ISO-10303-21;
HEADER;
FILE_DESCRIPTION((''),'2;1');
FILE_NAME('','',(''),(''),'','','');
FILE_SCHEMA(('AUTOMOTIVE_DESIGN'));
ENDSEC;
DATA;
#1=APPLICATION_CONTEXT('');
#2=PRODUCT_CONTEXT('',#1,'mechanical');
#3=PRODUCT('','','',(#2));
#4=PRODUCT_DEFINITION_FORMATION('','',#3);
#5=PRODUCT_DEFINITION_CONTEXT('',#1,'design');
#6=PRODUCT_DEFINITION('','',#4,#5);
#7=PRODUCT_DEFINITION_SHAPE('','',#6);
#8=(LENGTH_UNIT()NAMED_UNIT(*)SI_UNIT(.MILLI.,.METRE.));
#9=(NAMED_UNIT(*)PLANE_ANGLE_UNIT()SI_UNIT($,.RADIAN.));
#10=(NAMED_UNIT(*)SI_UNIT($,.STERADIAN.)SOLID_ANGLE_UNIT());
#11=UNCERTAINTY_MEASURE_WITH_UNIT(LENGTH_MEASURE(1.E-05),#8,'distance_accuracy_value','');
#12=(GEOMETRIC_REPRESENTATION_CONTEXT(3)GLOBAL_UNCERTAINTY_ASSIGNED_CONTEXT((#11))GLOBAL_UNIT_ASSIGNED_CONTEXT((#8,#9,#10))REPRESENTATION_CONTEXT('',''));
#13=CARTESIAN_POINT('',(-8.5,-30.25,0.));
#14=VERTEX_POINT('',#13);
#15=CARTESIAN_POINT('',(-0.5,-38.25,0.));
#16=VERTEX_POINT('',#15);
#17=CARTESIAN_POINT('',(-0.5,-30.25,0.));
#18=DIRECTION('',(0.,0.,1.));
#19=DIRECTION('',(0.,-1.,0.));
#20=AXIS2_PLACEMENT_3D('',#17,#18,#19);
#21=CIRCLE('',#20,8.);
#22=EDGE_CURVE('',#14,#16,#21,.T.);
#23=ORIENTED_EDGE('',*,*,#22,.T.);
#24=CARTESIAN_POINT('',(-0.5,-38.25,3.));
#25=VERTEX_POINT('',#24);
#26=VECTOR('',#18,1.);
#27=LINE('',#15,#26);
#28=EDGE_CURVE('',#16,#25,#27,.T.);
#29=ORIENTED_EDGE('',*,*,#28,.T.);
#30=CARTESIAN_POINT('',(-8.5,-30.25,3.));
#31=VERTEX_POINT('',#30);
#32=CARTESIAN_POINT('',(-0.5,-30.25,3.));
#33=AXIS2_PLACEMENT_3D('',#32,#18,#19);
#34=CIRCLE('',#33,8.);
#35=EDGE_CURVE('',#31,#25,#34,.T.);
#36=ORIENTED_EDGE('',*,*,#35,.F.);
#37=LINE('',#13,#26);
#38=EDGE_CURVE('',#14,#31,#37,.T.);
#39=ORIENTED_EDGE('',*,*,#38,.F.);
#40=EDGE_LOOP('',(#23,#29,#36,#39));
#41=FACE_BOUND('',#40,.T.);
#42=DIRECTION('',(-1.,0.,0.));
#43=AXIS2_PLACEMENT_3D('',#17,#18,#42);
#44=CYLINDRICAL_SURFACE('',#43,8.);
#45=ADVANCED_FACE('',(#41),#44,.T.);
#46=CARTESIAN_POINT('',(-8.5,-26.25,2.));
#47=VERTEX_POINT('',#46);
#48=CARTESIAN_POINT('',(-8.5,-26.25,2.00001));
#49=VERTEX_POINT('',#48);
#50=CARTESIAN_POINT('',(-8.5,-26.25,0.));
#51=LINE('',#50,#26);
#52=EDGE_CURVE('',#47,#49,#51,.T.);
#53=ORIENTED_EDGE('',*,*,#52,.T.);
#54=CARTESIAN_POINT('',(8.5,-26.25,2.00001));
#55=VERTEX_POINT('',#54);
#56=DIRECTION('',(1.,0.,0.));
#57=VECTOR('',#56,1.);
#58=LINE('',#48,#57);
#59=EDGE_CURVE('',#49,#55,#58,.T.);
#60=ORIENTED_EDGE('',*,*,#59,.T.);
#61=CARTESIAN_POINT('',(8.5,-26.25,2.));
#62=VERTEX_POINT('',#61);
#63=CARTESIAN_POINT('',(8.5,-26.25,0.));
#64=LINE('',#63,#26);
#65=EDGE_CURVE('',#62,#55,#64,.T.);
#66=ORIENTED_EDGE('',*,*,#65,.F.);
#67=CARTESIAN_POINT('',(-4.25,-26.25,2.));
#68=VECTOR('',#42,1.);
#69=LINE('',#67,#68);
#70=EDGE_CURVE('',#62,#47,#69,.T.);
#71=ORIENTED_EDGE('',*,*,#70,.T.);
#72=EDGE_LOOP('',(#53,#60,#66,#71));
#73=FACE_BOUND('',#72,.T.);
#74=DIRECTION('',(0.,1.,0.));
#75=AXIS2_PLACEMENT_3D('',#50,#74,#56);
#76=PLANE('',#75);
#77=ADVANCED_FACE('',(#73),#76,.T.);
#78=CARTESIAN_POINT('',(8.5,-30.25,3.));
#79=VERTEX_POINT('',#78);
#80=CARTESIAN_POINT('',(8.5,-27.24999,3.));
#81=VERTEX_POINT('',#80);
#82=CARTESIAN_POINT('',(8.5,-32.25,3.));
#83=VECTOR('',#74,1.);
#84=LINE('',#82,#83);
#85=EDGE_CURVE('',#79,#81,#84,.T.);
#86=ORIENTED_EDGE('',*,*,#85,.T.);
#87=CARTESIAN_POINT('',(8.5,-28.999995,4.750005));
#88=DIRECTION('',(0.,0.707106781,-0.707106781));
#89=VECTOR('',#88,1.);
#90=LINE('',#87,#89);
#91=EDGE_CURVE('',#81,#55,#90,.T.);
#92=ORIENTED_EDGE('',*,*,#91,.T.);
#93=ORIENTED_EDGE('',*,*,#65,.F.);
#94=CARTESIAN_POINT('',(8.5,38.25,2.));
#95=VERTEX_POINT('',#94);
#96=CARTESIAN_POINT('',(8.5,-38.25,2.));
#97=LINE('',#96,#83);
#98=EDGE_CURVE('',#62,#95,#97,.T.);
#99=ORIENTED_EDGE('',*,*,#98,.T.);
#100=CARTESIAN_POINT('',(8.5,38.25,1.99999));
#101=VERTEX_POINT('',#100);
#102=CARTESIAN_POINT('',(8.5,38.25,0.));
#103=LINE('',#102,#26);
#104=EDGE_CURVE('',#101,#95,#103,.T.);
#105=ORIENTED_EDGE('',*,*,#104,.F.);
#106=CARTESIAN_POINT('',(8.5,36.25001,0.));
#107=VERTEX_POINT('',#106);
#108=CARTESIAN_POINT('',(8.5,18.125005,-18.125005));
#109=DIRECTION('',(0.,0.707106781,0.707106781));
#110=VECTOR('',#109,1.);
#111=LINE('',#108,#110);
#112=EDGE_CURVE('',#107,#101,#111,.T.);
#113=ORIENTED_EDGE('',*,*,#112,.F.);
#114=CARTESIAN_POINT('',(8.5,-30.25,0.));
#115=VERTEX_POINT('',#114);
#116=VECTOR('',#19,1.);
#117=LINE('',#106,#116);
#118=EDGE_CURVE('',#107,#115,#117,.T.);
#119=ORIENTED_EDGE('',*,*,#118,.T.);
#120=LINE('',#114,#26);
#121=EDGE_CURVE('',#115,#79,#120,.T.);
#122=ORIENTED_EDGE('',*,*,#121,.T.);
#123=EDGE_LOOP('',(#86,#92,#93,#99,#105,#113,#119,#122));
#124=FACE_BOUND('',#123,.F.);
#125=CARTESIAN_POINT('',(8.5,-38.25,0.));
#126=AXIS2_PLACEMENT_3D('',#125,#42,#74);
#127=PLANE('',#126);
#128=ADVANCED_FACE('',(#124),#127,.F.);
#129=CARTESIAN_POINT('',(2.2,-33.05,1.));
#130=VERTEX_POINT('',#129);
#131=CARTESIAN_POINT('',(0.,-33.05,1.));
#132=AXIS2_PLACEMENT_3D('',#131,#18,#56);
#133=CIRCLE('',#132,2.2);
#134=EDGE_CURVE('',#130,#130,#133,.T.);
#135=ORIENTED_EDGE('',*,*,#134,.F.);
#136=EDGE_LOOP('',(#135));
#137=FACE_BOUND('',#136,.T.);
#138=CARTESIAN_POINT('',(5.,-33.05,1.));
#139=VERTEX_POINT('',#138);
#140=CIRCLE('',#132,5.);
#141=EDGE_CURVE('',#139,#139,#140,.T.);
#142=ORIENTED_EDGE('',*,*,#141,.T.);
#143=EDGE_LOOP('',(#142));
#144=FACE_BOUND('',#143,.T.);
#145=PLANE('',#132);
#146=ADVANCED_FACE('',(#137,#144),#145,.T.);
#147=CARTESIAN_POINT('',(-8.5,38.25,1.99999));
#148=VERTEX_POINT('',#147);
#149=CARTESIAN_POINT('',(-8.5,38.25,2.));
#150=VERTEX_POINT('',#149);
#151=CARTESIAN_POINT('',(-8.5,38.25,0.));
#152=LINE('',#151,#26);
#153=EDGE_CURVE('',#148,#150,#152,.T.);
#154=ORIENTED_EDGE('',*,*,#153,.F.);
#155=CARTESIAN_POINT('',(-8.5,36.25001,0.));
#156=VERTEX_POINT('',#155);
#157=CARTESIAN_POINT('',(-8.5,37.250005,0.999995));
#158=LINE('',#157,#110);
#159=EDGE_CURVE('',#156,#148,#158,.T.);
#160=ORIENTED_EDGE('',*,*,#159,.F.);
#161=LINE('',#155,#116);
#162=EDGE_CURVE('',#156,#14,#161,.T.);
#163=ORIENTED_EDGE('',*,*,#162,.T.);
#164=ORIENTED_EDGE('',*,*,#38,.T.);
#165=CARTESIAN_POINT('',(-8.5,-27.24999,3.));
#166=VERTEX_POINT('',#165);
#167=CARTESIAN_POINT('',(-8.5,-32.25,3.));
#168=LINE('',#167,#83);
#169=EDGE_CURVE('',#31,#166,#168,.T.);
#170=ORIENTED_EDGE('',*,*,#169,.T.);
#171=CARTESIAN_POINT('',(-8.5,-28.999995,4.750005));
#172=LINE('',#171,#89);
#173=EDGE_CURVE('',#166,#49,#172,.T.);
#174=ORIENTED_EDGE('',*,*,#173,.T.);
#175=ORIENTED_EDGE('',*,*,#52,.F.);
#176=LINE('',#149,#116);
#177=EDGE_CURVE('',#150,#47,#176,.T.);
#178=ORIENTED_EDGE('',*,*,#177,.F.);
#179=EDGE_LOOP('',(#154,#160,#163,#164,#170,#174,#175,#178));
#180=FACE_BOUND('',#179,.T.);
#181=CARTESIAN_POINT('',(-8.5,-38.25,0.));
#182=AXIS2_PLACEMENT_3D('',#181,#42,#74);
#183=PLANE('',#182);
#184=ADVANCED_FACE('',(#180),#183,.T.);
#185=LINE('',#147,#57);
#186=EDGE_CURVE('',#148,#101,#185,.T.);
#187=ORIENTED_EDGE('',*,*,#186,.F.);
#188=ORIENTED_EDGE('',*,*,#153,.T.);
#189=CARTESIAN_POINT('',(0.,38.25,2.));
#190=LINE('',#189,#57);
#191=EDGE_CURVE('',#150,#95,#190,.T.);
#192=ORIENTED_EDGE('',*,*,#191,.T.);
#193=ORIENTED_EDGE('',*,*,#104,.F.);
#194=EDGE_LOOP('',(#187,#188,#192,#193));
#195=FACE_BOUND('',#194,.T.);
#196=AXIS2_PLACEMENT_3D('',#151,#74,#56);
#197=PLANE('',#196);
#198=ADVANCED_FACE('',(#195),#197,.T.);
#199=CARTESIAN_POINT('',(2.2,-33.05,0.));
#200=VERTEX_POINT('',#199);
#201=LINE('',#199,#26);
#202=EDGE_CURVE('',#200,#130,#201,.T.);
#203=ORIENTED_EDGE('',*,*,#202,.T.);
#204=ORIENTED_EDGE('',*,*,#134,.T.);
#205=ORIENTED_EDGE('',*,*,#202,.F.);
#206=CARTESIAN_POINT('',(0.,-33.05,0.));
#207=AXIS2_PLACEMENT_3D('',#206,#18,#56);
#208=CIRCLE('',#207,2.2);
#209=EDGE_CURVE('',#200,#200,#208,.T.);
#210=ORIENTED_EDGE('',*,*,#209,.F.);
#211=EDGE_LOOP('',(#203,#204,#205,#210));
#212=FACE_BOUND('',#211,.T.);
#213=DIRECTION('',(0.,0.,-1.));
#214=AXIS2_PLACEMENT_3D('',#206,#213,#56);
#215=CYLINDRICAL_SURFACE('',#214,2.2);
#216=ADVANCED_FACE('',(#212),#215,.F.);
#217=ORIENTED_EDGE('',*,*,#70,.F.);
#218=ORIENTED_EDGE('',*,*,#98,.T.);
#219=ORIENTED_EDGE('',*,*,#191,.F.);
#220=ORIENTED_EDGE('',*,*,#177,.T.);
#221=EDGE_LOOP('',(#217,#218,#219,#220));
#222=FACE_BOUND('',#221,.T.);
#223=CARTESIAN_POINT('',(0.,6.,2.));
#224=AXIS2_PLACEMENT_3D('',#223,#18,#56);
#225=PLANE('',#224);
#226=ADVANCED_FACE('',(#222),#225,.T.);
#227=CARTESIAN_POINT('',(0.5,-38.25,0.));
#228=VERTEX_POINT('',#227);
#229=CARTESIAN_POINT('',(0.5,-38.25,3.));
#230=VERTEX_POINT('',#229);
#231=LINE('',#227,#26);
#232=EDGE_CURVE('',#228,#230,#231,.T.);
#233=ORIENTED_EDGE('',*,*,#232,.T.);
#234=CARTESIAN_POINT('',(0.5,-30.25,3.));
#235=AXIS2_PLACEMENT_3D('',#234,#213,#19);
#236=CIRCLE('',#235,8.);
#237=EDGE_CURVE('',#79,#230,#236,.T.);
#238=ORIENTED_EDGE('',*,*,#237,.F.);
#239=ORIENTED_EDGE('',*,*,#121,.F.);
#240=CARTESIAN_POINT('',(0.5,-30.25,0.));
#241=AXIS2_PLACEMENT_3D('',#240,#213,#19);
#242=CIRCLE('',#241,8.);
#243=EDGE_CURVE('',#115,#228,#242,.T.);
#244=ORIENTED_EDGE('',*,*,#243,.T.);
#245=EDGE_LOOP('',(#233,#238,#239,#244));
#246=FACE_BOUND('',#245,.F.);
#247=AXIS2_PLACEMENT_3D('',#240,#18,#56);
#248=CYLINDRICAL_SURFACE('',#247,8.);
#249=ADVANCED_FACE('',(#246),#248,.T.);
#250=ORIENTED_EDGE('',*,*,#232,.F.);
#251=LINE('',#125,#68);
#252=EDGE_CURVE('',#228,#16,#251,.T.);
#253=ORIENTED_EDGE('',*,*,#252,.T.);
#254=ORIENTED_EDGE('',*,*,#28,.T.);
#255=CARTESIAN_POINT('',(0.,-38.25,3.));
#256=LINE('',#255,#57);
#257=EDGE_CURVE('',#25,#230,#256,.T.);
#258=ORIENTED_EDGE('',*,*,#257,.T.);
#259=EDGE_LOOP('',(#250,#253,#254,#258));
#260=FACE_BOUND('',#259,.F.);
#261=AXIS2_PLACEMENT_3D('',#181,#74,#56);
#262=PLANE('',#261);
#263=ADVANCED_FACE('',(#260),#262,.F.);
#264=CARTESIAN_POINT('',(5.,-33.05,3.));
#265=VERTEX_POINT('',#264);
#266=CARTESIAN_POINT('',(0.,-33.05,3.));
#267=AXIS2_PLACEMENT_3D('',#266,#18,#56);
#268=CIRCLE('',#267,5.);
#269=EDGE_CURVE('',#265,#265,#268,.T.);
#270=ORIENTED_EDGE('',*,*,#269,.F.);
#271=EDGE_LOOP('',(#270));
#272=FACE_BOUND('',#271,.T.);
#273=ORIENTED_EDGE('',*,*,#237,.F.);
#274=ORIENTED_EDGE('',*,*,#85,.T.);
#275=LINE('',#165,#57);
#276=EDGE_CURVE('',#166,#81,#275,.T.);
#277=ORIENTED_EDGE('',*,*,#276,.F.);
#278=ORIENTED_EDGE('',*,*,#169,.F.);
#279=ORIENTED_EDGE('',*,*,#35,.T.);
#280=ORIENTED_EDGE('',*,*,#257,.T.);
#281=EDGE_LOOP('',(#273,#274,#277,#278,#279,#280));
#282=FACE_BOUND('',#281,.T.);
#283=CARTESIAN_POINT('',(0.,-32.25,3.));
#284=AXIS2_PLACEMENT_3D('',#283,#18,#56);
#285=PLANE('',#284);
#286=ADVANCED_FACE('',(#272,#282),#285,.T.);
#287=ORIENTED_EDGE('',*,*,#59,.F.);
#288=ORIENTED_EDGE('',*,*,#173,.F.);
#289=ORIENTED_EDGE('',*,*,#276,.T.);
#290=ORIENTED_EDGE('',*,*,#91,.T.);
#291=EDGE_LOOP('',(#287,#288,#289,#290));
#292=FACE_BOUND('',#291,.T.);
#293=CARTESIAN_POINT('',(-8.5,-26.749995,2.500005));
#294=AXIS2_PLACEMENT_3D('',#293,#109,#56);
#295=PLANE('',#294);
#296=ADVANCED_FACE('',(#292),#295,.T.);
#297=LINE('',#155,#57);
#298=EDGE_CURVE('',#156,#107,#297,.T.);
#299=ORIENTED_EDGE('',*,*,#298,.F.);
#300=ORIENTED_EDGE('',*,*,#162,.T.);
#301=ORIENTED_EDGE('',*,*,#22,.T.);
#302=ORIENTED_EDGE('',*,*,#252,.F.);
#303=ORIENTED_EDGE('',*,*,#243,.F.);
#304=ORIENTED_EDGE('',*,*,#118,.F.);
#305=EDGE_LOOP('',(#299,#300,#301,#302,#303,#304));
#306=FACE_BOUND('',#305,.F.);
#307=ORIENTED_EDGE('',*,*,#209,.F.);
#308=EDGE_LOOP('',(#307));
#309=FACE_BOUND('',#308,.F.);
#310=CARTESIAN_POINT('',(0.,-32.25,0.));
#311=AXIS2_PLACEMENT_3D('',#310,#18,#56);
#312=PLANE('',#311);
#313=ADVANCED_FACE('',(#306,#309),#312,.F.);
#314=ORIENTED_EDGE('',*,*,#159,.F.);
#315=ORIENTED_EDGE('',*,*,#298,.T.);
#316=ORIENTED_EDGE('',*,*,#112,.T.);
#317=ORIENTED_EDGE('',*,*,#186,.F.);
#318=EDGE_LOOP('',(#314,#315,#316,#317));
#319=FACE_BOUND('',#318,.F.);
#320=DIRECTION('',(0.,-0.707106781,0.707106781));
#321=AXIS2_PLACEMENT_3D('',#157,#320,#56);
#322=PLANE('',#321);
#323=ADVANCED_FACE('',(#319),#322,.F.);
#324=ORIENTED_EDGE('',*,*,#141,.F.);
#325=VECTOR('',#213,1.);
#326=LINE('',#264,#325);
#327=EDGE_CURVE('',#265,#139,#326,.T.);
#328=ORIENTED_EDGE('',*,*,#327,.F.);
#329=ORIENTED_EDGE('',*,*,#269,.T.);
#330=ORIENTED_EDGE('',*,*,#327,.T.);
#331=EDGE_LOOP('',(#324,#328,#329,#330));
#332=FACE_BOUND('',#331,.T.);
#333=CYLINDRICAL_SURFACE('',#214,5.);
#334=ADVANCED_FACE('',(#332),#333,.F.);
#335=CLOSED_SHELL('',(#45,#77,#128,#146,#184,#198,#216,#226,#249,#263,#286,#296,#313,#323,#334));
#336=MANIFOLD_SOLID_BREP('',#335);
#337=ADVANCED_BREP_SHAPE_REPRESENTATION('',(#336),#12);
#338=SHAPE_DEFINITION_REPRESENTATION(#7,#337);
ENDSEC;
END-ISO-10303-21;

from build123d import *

# Parameters (mm, degrees)
F0_W     = 17
F0_H     = 64.5
F0_H_2   = 12
F0_R     = 5
F1_DEPTH = 2
F2_R     = 8
F3_SIZE  = 1.99999
F0_R_2   = 2.2
F4_DEPTH = 1
F5_DEPTH = 3
F6_R     = 8
F7_SIZE  = 0.99999


# Not quite as in the source:
# - a fillet or chamfer is up to 0.001 mm smaller than in the source, because OpenCascade refuses the exact size


with BuildPart() as f1:
    # F0 (on Top) → F1 (new body)
    with BuildSketch(Plane.XY):
        with Locations((0, 6)):
            Rectangle(F0_W, F0_H)
        with Locations((0, -32.25)):
            Rectangle(F0_W, F0_H_2)
        with Locations((0, -33.05)):
            Circle(F0_R, mode=Mode.SUBTRACT)
    extrude(amount=F1_DEPTH)

    # F2
    f2_edges = [f1.edges().sort_by_distance(p)[0] for p in [
        (8.5, -38.25, 1),
        (-8.5, -38.25, 1),
    ]]
    fillet(f2_edges, radius=F2_R)

    # F3 (size 2 in the source; OpenCascade refuses exactly that, so slightly less here)
    f3_edges = [f1.edges().sort_by_distance(p)[0] for p in [
        (0, 38.25, 0),
    ]]
    chamfer(f3_edges, length=F3_SIZE)

    # F0 (on Top) → F4 (join)
    with BuildSketch(Plane.XY):
        with Locations((0, -33.05)):
            Circle(F0_R)
        with Locations((0, -33.05)):
            Circle(F0_R_2, mode=Mode.SUBTRACT)
    extrude(amount=F4_DEPTH)

    # F0 (on Top) → F5 (join)
    with BuildSketch(Plane.XY):
        with Locations((0, -32.25)):
            Rectangle(F0_W, F0_H_2)
        with Locations((0, -33.05)):
            Circle(F0_R, mode=Mode.SUBTRACT)
    extrude(amount=F5_DEPTH)

    # F6
    f6_edges = [f1.edges().sort_by_distance(p)[0] for p in [
        (8.5, -38.25, 1.5),
        (-8.5, -38.25, 1.5),
    ]]
    fillet(f6_edges, radius=F6_R)

    # F7 (size 1 in the source; OpenCascade refuses exactly that, so slightly less here)
    f7_edges = [f1.edges().sort_by_distance(p)[0] for p in [
        (0, -26.25, 3),
    ]]
    chamfer(f7_edges, length=F7_SIZE)


solid = f1.part
